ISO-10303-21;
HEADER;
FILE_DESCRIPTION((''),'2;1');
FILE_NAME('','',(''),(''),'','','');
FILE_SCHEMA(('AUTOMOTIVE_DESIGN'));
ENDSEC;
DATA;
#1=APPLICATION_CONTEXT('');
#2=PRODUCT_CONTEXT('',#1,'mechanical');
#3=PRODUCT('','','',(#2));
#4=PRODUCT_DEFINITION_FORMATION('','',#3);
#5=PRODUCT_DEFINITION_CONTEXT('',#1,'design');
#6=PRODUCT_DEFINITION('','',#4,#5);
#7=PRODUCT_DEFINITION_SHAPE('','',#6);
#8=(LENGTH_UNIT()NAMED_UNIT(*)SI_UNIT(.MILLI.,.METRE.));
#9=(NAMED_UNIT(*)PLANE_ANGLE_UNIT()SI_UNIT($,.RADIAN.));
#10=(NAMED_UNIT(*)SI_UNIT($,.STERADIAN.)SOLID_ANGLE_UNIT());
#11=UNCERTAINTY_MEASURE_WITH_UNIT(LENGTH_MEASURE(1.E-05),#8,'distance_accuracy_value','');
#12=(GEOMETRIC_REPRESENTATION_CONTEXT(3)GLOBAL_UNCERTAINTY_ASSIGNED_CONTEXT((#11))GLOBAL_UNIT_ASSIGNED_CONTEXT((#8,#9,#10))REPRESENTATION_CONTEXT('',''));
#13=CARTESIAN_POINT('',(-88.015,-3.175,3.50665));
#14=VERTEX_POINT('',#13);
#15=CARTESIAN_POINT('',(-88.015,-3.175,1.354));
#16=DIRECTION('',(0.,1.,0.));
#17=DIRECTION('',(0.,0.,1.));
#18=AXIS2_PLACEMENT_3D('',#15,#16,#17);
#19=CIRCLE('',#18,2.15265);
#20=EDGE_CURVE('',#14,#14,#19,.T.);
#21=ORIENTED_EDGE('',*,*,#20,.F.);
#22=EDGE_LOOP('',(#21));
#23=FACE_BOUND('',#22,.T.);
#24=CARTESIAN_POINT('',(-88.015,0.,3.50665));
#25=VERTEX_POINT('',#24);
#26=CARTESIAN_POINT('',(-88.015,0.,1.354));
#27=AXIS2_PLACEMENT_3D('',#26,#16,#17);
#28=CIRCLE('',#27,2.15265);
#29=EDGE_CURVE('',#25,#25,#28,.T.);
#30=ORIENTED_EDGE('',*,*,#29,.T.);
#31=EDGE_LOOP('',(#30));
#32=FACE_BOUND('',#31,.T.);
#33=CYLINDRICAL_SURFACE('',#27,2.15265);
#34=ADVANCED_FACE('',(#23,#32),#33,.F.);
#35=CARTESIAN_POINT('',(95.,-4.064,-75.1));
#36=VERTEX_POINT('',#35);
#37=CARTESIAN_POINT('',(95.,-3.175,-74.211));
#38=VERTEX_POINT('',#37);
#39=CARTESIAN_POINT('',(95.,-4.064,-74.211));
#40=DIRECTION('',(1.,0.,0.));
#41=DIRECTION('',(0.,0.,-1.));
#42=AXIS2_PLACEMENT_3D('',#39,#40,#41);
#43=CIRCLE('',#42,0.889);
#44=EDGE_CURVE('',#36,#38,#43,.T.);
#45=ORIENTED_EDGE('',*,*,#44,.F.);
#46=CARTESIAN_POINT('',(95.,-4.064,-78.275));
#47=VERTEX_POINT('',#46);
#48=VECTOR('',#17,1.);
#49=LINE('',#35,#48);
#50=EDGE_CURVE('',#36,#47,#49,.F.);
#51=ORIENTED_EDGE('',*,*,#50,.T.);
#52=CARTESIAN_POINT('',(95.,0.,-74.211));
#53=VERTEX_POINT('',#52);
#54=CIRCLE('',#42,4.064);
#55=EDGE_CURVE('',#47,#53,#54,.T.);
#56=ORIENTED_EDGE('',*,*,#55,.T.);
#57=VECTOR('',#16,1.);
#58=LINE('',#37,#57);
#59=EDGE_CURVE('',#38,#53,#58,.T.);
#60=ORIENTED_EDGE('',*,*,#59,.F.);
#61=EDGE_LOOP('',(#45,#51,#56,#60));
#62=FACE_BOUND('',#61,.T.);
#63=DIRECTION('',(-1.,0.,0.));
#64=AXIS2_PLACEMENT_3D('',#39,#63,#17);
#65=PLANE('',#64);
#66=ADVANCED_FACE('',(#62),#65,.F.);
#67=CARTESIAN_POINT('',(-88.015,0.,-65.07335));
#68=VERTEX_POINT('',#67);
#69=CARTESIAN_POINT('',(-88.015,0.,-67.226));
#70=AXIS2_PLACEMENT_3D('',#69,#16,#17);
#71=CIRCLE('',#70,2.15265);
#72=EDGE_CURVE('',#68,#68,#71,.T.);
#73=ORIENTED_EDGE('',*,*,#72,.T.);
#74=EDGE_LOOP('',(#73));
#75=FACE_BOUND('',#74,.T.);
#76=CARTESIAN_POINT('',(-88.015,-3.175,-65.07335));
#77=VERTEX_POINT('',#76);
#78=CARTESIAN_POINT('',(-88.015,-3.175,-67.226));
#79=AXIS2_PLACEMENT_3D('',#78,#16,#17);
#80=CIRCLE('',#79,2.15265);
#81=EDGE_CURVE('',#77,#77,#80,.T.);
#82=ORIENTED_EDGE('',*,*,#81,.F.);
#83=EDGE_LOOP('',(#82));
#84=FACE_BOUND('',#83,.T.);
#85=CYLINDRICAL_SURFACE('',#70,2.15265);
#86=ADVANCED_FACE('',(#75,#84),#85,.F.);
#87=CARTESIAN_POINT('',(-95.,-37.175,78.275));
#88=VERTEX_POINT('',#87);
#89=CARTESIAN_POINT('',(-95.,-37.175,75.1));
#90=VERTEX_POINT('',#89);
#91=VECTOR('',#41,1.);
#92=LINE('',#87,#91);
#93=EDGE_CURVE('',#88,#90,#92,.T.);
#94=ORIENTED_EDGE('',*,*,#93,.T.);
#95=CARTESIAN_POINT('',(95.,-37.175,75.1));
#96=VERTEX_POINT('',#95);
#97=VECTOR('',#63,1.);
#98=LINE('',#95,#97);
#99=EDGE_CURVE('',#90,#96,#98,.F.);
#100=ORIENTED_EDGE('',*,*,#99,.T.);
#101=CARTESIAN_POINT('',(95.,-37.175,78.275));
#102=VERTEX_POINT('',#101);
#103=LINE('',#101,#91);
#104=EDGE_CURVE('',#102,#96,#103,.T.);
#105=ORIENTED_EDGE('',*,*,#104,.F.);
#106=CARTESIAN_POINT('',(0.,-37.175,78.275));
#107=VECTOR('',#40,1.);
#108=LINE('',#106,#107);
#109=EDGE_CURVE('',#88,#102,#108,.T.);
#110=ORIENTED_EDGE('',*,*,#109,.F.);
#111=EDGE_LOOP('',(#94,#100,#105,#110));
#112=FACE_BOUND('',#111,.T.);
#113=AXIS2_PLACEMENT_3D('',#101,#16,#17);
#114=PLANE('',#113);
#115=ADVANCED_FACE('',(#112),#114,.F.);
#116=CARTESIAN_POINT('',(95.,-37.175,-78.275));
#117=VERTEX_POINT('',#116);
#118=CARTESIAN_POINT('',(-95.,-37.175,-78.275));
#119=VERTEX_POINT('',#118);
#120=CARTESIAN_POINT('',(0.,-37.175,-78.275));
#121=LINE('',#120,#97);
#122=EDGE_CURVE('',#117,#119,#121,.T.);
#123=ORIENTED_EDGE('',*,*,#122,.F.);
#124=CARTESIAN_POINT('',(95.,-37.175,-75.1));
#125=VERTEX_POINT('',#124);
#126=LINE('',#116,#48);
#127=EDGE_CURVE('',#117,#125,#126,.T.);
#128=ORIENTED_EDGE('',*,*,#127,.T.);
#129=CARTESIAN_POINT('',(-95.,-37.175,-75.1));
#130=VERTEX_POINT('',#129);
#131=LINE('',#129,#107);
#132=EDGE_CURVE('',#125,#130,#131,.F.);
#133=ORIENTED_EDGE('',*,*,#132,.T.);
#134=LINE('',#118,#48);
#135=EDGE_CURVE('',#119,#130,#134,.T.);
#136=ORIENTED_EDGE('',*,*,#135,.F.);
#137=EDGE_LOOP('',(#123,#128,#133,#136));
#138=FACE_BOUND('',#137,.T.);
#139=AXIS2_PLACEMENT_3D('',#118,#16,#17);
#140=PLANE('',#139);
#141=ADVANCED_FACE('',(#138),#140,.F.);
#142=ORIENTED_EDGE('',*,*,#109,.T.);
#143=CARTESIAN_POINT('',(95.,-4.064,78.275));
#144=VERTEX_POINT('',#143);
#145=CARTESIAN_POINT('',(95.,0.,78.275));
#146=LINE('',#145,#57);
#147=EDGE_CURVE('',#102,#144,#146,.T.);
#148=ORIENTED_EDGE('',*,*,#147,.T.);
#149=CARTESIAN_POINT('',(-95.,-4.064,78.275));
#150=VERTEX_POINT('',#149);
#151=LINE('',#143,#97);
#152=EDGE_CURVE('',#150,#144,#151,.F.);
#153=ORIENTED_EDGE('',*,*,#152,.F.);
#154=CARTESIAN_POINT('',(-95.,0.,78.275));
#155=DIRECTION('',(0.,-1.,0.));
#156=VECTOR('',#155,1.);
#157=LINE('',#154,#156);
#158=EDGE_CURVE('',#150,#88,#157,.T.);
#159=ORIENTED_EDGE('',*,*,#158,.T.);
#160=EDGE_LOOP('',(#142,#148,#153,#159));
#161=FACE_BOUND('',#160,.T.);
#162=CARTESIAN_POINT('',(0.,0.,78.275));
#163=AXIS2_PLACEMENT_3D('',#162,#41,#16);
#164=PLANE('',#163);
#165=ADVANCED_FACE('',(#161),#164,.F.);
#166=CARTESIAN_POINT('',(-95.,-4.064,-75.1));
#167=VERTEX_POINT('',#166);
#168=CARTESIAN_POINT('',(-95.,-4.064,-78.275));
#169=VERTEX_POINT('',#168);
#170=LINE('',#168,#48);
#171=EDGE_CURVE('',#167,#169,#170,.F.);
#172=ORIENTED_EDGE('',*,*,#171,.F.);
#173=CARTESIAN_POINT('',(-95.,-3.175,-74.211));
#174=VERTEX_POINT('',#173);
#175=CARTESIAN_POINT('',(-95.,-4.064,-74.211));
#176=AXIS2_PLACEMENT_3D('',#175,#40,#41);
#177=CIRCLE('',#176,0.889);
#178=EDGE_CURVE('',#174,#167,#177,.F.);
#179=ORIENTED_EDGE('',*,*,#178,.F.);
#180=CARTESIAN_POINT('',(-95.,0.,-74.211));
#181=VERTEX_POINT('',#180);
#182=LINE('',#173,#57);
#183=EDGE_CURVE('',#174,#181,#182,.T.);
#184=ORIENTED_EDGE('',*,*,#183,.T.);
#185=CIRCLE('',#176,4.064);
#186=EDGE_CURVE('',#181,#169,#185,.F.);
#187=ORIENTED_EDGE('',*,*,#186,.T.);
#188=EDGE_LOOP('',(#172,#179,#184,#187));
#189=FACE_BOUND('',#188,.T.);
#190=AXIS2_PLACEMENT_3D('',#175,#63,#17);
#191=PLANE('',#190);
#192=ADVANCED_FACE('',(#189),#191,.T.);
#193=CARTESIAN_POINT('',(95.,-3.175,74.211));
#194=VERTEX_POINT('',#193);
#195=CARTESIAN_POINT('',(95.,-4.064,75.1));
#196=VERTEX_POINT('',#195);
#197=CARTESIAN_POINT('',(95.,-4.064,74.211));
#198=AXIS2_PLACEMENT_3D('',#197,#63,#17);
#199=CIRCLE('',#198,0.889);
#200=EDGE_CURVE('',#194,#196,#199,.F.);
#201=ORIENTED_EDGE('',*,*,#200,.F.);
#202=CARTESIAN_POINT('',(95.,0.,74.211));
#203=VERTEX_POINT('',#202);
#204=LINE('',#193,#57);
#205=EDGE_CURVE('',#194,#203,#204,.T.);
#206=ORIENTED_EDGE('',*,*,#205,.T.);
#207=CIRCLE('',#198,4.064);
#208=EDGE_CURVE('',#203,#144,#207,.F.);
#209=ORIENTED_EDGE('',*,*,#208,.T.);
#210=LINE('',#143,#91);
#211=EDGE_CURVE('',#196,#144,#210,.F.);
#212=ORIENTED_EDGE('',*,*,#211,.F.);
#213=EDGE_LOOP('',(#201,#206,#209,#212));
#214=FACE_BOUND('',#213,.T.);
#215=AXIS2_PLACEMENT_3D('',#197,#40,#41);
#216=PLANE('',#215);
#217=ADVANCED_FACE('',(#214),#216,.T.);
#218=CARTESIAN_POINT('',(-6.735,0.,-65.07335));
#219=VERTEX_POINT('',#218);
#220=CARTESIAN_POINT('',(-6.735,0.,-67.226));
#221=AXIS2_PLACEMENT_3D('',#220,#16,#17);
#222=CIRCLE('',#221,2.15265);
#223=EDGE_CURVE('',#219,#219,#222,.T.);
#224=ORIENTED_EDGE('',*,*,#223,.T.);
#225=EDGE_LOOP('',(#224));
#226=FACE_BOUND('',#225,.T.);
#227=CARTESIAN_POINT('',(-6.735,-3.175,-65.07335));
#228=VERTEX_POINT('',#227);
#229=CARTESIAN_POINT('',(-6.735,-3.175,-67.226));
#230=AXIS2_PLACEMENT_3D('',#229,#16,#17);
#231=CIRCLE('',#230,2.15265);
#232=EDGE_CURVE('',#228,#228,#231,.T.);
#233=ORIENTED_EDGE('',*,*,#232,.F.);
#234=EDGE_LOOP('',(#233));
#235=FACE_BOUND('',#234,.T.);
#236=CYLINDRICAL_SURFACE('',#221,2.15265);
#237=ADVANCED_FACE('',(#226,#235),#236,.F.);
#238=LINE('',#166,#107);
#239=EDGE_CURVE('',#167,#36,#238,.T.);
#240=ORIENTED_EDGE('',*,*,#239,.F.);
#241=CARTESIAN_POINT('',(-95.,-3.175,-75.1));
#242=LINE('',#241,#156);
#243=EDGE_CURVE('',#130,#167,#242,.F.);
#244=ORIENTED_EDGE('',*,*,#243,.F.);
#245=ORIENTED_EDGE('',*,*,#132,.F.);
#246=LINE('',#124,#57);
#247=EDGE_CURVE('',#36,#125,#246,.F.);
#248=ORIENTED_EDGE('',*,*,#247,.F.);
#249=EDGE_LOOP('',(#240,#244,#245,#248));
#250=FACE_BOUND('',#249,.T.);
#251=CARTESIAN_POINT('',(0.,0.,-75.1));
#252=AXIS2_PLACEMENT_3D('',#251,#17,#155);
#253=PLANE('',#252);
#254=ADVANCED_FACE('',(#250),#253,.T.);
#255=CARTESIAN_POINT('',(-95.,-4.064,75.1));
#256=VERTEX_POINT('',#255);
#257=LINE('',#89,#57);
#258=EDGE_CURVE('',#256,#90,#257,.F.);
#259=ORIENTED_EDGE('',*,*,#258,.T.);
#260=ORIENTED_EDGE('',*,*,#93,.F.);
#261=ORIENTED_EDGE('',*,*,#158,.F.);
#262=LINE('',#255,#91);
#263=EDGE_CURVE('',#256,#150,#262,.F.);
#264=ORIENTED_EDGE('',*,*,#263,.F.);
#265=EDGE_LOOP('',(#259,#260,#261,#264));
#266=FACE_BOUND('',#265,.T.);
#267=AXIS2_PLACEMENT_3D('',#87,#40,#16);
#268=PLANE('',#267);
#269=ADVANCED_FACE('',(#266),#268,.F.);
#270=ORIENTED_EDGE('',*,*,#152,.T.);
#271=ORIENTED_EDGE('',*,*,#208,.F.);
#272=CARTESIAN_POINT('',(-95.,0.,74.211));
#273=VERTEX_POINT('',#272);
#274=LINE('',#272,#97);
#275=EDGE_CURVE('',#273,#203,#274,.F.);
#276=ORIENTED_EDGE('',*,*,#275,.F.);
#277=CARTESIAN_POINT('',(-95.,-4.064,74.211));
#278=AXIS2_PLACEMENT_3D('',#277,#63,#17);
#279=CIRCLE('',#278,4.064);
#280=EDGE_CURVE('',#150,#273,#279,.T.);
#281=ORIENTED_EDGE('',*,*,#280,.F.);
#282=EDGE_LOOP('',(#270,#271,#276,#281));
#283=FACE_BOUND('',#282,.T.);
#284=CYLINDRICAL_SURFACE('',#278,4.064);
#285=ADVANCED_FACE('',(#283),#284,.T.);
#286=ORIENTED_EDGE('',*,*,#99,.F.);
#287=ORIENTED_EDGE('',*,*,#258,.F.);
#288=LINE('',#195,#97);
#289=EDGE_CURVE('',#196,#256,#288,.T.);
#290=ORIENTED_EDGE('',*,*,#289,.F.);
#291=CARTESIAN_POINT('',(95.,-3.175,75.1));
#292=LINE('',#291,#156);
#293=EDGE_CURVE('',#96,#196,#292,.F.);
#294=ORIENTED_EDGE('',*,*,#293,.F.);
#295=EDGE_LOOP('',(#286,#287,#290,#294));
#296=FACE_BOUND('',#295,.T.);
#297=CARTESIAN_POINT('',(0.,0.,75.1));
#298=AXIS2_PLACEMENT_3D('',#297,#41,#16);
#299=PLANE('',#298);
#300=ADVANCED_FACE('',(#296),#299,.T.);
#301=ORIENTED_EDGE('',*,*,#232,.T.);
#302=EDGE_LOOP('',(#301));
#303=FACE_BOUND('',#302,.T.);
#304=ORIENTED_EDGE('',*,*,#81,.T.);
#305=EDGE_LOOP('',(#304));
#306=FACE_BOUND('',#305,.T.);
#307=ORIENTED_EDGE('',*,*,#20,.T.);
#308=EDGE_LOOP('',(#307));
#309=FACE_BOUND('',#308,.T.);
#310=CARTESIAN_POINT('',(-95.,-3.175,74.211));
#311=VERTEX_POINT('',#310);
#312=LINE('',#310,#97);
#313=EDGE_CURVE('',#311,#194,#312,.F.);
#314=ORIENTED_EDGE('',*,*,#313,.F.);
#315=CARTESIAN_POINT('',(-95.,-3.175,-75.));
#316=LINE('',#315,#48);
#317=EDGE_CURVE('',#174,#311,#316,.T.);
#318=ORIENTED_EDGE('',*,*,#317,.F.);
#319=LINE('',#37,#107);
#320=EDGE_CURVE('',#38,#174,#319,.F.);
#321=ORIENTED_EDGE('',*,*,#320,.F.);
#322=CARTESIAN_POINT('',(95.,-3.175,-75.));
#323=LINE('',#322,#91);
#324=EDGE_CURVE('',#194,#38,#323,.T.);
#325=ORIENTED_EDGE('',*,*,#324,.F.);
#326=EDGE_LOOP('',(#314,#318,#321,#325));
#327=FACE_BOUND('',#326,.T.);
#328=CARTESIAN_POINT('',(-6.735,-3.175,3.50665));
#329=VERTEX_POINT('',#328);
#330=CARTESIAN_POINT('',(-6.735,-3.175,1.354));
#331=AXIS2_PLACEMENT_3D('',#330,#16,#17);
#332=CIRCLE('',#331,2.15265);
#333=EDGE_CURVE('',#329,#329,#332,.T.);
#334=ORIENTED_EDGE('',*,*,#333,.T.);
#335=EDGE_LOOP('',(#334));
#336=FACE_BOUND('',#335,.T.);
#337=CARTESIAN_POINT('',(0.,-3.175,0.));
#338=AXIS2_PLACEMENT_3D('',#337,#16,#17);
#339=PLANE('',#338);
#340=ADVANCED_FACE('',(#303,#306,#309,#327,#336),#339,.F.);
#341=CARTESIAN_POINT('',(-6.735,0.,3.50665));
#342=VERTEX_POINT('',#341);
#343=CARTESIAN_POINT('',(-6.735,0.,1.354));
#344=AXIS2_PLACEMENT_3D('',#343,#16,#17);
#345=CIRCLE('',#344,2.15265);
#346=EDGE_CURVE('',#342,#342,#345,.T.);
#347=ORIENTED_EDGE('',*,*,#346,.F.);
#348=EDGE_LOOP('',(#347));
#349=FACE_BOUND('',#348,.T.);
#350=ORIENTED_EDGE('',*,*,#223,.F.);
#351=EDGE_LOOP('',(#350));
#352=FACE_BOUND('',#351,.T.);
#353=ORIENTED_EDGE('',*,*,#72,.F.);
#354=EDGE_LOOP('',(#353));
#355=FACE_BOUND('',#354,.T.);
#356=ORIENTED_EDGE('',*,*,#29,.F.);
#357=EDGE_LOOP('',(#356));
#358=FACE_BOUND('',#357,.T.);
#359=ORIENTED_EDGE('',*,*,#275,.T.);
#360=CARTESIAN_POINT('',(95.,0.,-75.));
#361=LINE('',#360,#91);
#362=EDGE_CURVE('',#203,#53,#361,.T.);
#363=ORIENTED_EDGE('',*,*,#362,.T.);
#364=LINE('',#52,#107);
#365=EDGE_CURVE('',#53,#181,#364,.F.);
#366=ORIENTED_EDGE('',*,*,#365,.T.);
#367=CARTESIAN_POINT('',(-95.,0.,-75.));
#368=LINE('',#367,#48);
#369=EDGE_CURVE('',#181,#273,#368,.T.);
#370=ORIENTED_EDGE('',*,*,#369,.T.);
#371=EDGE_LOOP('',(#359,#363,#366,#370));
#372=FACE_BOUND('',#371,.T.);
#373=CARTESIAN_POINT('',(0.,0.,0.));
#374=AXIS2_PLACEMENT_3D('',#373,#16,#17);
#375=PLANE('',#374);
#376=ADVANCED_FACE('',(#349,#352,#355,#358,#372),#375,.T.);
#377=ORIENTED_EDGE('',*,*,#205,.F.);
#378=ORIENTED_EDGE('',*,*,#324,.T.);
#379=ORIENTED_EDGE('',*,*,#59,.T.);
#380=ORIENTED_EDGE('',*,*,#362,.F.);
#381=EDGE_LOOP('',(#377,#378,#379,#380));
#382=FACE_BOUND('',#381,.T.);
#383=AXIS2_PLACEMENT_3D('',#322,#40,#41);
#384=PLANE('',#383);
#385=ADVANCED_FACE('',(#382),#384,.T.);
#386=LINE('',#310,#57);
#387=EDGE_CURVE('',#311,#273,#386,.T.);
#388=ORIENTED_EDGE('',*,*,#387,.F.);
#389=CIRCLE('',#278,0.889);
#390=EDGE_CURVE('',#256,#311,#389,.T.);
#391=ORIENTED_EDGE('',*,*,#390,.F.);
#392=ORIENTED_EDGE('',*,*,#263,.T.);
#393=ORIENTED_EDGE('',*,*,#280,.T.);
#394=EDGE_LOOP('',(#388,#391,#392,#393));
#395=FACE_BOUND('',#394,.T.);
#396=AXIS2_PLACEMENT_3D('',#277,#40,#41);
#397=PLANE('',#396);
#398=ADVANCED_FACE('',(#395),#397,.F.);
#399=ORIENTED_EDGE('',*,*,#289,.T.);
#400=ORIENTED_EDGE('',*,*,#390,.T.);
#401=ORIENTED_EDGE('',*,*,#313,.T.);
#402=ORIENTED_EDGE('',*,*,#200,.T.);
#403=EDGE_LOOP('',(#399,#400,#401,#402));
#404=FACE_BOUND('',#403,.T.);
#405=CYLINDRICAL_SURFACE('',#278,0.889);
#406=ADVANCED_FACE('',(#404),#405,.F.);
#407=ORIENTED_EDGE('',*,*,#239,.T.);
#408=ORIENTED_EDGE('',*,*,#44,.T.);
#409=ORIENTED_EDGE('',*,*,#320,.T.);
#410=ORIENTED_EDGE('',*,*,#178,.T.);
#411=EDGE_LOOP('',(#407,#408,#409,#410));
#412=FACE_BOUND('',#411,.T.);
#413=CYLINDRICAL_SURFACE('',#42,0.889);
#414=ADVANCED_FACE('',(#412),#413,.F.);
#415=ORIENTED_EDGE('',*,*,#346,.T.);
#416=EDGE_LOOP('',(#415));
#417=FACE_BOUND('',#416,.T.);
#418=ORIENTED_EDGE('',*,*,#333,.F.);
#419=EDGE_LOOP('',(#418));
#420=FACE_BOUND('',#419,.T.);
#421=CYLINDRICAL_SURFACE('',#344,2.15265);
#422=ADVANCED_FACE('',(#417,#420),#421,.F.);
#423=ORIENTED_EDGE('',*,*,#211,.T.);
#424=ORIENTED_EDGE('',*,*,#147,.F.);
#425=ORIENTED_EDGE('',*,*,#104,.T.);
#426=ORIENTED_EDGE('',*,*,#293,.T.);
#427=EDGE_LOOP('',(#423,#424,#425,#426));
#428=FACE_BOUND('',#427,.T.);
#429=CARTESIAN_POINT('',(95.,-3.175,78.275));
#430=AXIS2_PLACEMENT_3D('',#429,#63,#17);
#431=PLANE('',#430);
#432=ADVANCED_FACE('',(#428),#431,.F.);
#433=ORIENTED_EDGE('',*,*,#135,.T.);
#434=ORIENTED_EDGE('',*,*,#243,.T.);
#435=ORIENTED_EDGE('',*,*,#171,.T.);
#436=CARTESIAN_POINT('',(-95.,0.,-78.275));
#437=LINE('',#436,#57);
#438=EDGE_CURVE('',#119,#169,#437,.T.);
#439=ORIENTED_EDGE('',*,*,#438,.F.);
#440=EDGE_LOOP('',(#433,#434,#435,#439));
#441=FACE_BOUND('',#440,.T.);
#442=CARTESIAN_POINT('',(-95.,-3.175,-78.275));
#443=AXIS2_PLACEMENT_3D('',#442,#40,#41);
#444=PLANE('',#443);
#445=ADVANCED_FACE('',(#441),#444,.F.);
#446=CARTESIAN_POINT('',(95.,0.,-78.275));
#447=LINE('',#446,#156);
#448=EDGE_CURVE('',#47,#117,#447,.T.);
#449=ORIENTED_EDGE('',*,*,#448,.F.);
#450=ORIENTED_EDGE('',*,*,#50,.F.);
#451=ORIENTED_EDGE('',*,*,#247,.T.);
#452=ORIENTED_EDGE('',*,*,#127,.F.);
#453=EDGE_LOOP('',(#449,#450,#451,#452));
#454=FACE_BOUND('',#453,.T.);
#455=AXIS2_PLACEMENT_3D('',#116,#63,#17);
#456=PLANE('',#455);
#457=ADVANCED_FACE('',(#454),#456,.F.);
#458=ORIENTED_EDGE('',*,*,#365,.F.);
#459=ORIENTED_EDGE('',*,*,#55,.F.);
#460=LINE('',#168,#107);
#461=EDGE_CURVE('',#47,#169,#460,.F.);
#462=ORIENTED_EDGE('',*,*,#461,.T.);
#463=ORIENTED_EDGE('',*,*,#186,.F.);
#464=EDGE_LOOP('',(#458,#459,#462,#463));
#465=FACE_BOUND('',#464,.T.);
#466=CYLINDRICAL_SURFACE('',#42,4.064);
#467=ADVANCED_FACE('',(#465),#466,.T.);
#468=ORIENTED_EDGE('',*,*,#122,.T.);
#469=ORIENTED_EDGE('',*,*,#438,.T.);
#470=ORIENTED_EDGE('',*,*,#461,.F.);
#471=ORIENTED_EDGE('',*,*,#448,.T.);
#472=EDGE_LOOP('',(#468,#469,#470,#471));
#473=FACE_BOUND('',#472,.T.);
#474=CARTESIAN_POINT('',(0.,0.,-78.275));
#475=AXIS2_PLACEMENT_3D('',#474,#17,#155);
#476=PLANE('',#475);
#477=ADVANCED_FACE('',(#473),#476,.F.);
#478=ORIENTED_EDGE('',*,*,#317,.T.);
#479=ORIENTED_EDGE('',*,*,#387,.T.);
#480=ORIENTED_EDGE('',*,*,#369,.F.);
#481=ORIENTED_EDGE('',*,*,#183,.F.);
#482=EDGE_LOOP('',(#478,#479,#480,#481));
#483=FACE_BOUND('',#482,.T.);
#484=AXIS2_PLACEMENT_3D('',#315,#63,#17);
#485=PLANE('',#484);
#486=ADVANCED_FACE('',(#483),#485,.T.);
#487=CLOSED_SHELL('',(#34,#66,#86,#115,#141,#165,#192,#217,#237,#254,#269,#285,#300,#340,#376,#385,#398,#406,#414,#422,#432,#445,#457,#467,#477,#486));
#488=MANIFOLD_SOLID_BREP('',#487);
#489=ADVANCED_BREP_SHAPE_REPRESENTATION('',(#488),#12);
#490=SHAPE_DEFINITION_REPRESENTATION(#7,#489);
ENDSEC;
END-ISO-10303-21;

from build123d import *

# Parameters (mm, degrees)
SKETCH2_W                      = 190
SKETCH2_H                      = 150
BASE_FLANGE1_DEPTH             = 3.175
EDGE_FLANGE1_STRIP_W           = 14.578
EDGE_FLANGE1_STRIP_H           = 3.175
EDGE_FLANGE1_STRIP_CUT_DEPTH   = 190
EDGE_FLANGE1_STRIP_2_W         = 14.578
EDGE_FLANGE1_STRIP_2_H         = 3.175
EDGE_FLANGE1_STRIP_CUT_2_DEPTH = 190
EDGE_FLANGE1_DEPTH             = 190
EDGE_FLANGE1_BEND_DEPTH        = 190
F_6_CLEARANCE_HOLE1_D          = 4.3053
F_6_CLEARANCE_HOLE1_DEPTH      = 17.23
F_6_CLEARANCE_HOLE1_TIP        = 1.293442612


# Sheet-metal steps are written as plain solids
with BuildPart() as part:
    # Sketch2 → Base-Flange1 (new body)
    with BuildSketch(Plane(origin=(0, 0, 0), x_dir=(1, 0, 0), z_dir=(0, 1, 0))):
        Rectangle(SKETCH2_W, SKETCH2_H)
    extrude(amount=-BASE_FLANGE1_DEPTH)

    # Edge-Flange1 strip (across the edge) → Edge-Flange1 strip cut (cut)
    with BuildSketch(Plane(origin=(95, -3.175, 75.1), x_dir=(0, 0, -1), z_dir=(-1, 0, 0))):
        with Locations((-6.4, -1.5875)):
            Rectangle(EDGE_FLANGE1_STRIP_W, EDGE_FLANGE1_STRIP_H)
    extrude(amount=EDGE_FLANGE1_STRIP_CUT_DEPTH, mode=Mode.SUBTRACT)

    # Edge-Flange1 strip 2 (across the edge) → Edge-Flange1 strip cut 2 (cut)
    with BuildSketch(Plane(origin=(-95, -3.175, -75.1), x_dir=(0, 0, 1), z_dir=(1, 0, 0))):
        with Locations((-6.4, -1.5875)):
            Rectangle(EDGE_FLANGE1_STRIP_2_W, EDGE_FLANGE1_STRIP_2_H)
    extrude(amount=EDGE_FLANGE1_STRIP_CUT_2_DEPTH, mode=Mode.SUBTRACT)

    # Edge-Flange1 section (across the edge) → Edge-Flange1 (add)
    with BuildSketch(Plane(origin=(95, -3.175, 75.1), x_dir=(0, 0, -1), z_dir=(-1, 0, 0))):
        with BuildLine():
            Line((-3.175, 0.889), (-3.175, 34))
            Line((-3.175, 34), (0, 34))
            Line((0, 34), (0, 0.889))
            ThreePointArc((0, 0.889), (0.260382072, 0.260382072), (0.889, 0))
            Line((0.889, 0), (0.889, -3.175))
            ThreePointArc((0.889, -3.175), (-1.984681959, -1.984681959), (-3.175, 0.889))
        make_face()
    extrude(amount=EDGE_FLANGE1_DEPTH)

    # Edge-Flange1 section 2 (across the edge) → Edge-Flange1 bend (add)
    with BuildSketch(Plane(origin=(-95, -3.175, -75.1), x_dir=(0, 0, 1), z_dir=(1, 0, 0))):
        with BuildLine():
            Line((-3.175, 0.889), (-3.175, 34))
            Line((-3.175, 34), (0, 34))
            Line((0, 34), (0, 0.889))
            ThreePointArc((0, 0.889), (0.260382072, 0.260382072), (0.889, 0))
            Line((0.889, 0), (0.889, -3.175))
            ThreePointArc((0.889, -3.175), (-1.984681959, -1.984681959), (-3.175, 0.889))
        make_face()
    extrude(amount=EDGE_FLANGE1_BEND_DEPTH)

    # #6 Clearance Hole1
    with Locations(Plane(origin=(0, 0, 0), x_dir=(1, 0, 0), z_dir=(0, 1, 0))):
        with Locations((-88.015, 67.226), (-6.735, 67.226), (-6.735, -1.354), (-88.015, -1.354)):
            Hole(F_6_CLEARANCE_HOLE1_D / 2, depth=F_6_CLEARANCE_HOLE1_DEPTH)
            with Locations((0, 0, -(F_6_CLEARANCE_HOLE1_DEPTH + F_6_CLEARANCE_HOLE1_TIP / 2))):  # 118° drill point
                Cone(0, F_6_CLEARANCE_HOLE1_D / 2, F_6_CLEARANCE_HOLE1_TIP, mode=Mode.SUBTRACT)


solid = part.part
